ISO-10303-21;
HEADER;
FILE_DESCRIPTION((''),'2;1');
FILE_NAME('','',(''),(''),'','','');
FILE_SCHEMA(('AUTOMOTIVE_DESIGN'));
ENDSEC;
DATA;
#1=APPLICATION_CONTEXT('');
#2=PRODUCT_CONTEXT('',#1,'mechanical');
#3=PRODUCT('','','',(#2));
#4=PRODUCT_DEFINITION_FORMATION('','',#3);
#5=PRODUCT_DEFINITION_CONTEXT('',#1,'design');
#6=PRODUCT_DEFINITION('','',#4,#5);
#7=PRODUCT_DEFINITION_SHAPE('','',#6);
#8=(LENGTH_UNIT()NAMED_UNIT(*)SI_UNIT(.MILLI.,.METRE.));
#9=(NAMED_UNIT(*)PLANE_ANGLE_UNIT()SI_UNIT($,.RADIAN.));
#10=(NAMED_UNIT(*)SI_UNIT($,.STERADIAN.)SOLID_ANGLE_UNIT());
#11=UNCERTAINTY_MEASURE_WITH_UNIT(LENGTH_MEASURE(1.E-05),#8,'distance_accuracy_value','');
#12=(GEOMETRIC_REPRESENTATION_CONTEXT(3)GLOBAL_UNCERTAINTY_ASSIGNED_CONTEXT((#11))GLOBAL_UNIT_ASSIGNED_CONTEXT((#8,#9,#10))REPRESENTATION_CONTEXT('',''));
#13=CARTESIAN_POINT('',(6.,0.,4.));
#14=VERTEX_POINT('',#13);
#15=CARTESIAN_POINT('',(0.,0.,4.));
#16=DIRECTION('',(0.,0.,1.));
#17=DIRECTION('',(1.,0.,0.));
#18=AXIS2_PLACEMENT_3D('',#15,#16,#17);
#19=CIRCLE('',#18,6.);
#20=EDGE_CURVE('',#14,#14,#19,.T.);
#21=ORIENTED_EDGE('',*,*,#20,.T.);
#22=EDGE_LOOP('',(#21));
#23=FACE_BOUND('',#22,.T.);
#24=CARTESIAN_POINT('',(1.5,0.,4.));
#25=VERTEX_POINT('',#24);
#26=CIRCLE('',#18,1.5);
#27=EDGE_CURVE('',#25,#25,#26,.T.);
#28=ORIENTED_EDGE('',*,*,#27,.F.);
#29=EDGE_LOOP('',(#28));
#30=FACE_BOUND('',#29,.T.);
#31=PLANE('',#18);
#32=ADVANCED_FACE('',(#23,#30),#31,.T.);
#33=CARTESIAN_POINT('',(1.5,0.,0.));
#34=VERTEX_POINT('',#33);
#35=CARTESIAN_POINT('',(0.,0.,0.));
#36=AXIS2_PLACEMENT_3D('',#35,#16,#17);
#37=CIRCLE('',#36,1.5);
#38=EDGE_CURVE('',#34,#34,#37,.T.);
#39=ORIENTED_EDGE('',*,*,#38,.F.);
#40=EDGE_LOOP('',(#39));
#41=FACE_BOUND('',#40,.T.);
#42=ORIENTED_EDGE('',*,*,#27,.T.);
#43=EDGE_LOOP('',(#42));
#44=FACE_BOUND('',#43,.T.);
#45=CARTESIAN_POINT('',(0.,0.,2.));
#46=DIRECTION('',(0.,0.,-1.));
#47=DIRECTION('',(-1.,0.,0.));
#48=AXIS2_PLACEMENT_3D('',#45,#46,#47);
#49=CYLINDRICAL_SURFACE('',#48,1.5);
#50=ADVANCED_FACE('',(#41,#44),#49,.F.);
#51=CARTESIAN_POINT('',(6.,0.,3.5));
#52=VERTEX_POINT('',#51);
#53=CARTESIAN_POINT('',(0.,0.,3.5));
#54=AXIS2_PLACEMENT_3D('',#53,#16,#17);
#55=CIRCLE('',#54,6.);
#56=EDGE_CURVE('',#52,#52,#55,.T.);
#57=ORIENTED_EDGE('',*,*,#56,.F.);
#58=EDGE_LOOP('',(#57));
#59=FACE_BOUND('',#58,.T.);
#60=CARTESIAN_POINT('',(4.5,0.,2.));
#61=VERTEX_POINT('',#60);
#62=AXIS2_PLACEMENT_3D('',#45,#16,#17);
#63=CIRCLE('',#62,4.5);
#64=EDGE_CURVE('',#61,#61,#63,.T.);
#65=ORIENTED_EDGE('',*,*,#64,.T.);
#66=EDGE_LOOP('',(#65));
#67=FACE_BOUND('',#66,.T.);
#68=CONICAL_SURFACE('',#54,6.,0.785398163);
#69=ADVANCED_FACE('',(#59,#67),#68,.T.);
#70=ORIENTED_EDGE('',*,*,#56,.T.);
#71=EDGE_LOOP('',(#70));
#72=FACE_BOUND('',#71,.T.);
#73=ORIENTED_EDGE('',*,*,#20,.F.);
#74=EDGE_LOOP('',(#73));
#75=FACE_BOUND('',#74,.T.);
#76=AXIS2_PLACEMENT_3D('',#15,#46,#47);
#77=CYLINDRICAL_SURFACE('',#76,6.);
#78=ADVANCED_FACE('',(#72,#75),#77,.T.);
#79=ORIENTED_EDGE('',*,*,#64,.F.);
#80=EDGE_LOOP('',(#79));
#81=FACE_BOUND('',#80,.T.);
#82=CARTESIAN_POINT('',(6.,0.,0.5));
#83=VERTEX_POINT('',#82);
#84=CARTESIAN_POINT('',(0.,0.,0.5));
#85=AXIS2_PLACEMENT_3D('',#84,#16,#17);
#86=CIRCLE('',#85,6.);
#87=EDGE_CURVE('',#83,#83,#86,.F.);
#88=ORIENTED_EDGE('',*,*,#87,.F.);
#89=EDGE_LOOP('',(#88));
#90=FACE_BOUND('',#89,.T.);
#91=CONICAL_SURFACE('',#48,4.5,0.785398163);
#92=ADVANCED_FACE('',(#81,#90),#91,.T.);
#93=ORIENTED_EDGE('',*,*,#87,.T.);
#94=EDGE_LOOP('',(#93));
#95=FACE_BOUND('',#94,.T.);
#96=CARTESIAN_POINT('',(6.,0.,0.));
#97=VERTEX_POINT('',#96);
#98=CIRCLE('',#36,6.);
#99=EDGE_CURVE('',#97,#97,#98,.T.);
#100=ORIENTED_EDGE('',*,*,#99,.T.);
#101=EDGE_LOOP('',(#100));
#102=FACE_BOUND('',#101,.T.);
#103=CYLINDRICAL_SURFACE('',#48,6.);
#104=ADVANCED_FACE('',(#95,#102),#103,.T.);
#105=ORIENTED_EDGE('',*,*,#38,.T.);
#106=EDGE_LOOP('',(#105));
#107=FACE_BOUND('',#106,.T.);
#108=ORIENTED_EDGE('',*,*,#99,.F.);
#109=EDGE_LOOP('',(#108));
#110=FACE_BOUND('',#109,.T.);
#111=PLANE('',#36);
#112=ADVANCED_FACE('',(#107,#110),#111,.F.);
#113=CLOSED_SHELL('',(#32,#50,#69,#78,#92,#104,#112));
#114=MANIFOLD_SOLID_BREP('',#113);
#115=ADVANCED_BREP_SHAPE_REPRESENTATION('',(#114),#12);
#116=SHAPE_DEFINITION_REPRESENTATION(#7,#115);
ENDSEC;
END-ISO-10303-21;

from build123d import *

# Parameters (mm, degrees)
SKETCH1_R           = 6
SKETCH1_R_2         = 1.5
BOSS_EXTRUDE1_DEPTH = 2
CHAMFER1_SIZE       = 1.5
SKETCH2_R           = 6
SKETCH2_R_2         = 1.5
BOSS_EXTRUDE2_DEPTH = 2
CHAMFER2_SIZE       = 1.5


with BuildPart() as part:
    # Sketch1 → Boss-Extrude1 (new body)
    with BuildSketch(Plane.XY):
        Circle(SKETCH1_R)
        Circle(SKETCH1_R_2, mode=Mode.SUBTRACT)
    extrude(amount=BOSS_EXTRUDE1_DEPTH)

    # Chamfer1
    chamfer1_edges = [part.edges().sort_by_distance(p)[0] for p in [
        (-6, 0, 2),
    ]]
    chamfer(chamfer1_edges, length=CHAMFER1_SIZE)

    # Sketch2 → Boss-Extrude2 (add)
    with BuildSketch(Plane.XY.offset(2)):
        Circle(SKETCH2_R)
        Circle(SKETCH2_R_2, mode=Mode.SUBTRACT)
    extrude(amount=BOSS_EXTRUDE2_DEPTH)

    # Chamfer2
    chamfer2_edges = [part.edges().sort_by_distance(p)[0] for p in [
        (-6, 0, 2),
    ]]
    chamfer(chamfer2_edges, length=CHAMFER2_SIZE - 0.0001)  # a hair under: the kernel refuses the full size


solid = part.part
